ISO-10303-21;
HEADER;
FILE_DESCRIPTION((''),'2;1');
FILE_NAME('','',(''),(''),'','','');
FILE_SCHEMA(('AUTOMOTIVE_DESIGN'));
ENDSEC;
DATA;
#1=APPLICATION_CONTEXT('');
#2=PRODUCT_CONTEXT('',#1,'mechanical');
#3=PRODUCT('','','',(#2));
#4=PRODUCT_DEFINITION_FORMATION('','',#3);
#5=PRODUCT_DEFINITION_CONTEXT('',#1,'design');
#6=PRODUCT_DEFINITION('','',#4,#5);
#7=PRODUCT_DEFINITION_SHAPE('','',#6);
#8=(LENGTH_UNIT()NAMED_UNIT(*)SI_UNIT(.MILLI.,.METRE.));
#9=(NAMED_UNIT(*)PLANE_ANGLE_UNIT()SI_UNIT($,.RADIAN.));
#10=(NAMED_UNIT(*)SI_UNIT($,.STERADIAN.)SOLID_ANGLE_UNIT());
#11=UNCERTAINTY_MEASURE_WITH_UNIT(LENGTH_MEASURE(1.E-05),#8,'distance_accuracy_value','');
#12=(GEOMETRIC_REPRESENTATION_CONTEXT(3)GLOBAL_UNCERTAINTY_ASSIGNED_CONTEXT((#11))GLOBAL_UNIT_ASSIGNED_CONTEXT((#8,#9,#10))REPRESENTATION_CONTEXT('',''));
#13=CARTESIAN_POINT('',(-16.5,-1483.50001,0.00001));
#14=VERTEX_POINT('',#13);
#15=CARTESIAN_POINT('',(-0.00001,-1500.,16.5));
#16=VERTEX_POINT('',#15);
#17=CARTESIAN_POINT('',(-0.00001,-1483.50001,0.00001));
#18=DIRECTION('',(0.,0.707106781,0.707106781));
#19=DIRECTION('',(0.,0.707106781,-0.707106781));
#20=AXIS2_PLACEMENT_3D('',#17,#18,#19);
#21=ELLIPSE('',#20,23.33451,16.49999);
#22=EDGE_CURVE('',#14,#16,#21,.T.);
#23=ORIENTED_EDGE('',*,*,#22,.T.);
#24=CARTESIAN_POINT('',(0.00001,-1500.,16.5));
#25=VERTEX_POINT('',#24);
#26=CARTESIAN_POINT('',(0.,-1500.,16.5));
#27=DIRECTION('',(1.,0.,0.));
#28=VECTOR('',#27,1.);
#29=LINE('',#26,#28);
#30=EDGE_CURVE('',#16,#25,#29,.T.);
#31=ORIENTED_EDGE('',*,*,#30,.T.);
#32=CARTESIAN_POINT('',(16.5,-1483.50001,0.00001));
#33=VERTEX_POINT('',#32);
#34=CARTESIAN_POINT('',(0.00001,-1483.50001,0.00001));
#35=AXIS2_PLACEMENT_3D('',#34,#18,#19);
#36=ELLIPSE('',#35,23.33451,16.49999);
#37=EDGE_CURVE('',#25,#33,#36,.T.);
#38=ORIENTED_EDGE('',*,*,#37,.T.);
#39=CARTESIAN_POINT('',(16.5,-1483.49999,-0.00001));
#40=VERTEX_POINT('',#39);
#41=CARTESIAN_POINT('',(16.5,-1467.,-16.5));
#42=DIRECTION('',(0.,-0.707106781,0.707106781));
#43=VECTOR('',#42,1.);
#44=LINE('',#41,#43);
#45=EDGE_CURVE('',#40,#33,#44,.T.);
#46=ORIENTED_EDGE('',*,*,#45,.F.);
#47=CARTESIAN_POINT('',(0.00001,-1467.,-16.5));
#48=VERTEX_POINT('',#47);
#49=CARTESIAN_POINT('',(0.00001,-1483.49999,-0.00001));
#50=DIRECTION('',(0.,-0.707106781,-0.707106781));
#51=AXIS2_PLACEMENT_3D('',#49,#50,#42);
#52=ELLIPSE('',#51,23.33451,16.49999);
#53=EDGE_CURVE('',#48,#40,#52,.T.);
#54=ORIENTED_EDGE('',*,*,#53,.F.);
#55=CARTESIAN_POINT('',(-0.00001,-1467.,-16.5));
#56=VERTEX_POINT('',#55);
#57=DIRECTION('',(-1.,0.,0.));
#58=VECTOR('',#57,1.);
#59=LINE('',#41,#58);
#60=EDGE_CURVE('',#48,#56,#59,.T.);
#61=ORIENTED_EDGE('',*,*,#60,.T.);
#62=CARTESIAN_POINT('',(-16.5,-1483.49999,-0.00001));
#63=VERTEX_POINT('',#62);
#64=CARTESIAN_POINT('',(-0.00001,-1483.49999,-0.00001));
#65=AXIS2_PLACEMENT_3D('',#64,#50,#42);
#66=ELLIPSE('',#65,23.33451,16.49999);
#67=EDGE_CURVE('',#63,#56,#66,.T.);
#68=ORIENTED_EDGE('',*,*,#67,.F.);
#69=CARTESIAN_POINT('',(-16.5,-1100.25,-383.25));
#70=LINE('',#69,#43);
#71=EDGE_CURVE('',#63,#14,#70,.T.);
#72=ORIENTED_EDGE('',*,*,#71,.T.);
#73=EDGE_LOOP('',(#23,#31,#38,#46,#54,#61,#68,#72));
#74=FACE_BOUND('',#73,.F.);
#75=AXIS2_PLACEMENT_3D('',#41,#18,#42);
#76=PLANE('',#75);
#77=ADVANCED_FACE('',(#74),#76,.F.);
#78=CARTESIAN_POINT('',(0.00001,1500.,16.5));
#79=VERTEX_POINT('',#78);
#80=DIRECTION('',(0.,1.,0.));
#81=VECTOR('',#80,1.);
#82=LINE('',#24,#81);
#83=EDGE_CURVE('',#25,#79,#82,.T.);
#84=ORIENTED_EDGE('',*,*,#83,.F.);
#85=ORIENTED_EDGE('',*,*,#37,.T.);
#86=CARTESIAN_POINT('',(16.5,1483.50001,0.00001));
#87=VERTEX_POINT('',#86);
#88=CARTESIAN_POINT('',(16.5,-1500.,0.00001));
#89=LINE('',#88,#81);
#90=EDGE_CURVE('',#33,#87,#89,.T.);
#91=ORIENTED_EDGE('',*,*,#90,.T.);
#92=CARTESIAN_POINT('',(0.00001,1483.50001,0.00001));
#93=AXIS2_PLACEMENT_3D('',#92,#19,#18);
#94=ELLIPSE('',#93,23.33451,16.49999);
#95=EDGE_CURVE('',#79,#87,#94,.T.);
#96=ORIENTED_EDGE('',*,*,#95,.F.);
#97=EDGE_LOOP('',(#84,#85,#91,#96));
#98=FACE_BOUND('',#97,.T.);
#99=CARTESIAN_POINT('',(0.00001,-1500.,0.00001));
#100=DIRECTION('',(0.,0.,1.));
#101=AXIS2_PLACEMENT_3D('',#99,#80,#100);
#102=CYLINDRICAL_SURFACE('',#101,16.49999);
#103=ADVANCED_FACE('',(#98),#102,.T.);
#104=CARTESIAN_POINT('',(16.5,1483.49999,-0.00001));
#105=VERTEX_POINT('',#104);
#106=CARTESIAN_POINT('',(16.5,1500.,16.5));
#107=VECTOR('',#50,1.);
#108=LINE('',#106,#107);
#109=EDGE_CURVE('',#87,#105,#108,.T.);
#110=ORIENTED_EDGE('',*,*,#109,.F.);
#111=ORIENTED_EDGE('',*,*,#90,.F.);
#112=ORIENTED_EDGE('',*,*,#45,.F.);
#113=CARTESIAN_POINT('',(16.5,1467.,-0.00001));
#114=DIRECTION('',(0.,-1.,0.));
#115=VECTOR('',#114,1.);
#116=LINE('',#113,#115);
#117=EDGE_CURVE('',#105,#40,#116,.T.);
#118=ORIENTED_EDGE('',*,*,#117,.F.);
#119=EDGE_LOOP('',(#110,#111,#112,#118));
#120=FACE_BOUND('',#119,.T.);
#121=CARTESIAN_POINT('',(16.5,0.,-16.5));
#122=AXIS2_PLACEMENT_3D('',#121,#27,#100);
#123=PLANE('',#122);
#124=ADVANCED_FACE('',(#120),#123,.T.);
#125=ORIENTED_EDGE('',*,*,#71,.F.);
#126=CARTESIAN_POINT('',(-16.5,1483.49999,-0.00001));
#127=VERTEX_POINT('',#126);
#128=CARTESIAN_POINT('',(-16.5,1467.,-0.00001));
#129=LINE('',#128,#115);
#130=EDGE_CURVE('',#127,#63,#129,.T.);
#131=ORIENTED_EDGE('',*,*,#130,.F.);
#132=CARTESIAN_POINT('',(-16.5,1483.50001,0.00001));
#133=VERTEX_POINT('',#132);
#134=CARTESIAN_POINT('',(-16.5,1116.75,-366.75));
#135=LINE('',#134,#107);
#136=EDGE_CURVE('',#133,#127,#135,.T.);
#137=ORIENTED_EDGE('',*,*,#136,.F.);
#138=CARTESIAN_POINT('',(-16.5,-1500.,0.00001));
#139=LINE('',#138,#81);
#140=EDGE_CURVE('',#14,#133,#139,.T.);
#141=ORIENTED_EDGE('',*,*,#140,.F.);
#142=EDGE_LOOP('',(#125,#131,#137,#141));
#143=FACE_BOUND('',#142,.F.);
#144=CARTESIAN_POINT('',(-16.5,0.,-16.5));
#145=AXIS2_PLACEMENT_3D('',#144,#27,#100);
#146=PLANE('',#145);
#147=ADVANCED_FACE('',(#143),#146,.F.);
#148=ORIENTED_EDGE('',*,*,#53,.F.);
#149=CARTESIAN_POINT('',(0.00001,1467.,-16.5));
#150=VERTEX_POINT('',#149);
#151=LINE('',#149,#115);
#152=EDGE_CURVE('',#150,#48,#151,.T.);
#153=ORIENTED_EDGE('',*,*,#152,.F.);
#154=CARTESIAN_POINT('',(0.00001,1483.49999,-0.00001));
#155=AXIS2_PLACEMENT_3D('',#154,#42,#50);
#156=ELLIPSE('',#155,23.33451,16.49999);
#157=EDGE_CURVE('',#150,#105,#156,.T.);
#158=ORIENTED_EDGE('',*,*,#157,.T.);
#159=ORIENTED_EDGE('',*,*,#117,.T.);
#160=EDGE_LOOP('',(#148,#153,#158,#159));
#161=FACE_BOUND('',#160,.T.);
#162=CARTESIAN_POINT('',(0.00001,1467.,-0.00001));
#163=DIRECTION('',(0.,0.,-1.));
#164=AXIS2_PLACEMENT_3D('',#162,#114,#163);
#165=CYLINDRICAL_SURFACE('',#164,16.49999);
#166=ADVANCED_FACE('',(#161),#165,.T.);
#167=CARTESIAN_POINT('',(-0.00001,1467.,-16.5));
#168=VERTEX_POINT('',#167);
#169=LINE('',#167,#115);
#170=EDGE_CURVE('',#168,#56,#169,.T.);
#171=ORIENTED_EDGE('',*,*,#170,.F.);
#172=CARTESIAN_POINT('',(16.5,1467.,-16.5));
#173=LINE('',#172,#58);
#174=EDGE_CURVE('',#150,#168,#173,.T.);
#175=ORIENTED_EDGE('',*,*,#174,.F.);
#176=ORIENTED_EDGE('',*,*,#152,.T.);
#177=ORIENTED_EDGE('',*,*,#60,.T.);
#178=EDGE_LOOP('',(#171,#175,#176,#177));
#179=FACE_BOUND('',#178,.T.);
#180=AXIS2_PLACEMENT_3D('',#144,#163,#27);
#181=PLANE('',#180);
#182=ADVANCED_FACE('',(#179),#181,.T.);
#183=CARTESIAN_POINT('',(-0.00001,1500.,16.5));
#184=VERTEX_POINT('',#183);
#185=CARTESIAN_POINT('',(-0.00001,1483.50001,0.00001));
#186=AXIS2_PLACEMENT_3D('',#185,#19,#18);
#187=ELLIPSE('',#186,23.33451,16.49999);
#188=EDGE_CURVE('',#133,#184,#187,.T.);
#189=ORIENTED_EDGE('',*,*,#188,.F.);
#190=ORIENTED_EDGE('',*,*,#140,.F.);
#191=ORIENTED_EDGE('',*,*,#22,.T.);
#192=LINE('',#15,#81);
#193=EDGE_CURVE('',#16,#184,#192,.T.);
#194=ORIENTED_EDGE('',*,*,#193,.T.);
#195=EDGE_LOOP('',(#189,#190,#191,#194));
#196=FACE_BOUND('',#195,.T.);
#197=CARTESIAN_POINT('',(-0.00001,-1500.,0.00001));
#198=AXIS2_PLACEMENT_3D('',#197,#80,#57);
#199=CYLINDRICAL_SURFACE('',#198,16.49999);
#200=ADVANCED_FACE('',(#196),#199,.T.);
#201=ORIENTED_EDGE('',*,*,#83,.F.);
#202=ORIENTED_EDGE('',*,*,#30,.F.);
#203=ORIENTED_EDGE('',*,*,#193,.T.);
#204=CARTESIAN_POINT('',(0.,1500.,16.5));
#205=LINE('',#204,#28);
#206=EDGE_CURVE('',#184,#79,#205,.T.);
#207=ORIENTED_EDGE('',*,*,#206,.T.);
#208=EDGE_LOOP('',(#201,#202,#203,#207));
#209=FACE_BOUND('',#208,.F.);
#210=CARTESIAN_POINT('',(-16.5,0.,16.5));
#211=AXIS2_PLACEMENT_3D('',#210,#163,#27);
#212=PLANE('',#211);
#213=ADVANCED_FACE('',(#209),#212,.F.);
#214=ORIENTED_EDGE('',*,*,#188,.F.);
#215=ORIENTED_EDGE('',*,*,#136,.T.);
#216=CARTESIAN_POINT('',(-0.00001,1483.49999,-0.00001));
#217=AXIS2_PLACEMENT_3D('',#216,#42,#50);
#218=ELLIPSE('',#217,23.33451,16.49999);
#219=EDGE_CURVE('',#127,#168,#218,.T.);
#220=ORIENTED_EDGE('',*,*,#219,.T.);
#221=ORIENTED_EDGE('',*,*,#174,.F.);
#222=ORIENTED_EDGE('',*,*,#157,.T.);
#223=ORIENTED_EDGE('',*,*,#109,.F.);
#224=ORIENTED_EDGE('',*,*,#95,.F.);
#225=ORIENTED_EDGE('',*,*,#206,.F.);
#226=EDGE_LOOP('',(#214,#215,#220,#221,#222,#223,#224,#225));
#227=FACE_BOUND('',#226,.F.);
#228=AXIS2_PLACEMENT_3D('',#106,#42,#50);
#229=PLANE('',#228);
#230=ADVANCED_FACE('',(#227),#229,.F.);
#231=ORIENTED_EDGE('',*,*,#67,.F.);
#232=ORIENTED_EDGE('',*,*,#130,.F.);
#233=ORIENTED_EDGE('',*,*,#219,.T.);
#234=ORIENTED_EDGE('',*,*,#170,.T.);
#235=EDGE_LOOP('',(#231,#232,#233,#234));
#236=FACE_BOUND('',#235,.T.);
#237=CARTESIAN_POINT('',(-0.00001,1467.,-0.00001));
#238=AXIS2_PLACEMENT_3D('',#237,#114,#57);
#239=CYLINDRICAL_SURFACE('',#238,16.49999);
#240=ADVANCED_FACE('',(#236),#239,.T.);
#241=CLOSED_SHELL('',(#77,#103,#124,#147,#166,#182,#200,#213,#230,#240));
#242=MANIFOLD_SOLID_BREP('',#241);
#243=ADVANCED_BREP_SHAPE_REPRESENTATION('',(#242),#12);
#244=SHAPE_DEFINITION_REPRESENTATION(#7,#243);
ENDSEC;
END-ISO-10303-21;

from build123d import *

# Parameters (mm, degrees)
F0_W     = 33
F0_H     = 33
F1_DEPTH = 1500
F3_DEPTH = 50
F4_R     = 16.49999


# Not quite as in the source:
# - a fillet or chamfer is up to 0.001 mm smaller than in the source, because OpenCascade refuses the exact size


with BuildPart() as f1:
    # F0 (on Front) → F1 (new body, symmetric)
    with BuildSketch(Plane.XZ):
        Rectangle(F0_W, F0_H)
    extrude(amount=F1_DEPTH, both=True)

    # F2 (on face) → F3 (cut)
    with BuildSketch(Plane.YZ.offset(16.5)):
        Polygon((1500, -16.5), (1500, 16.5), (1467, -16.5), align=None)
        Polygon((-1467, -16.5), (-1500, 16.5), (-1500, -16.5), align=None)
    extrude(amount=-F3_DEPTH, mode=Mode.SUBTRACT)

    # F4 (radius 16.5 in the source; OpenCascade refuses exactly that, so slightly less here)
    f4_edges = [f1.edges().sort_by_distance(p)[0] for p in [
        (16.5, 0, 16.5),
        (16.5, 0, -16.5),
        (-16.5, 0, -16.5),
        (-16.5, 0, 16.5),
    ]]
    fillet(f4_edges, radius=F4_R)


solid = f1.part
